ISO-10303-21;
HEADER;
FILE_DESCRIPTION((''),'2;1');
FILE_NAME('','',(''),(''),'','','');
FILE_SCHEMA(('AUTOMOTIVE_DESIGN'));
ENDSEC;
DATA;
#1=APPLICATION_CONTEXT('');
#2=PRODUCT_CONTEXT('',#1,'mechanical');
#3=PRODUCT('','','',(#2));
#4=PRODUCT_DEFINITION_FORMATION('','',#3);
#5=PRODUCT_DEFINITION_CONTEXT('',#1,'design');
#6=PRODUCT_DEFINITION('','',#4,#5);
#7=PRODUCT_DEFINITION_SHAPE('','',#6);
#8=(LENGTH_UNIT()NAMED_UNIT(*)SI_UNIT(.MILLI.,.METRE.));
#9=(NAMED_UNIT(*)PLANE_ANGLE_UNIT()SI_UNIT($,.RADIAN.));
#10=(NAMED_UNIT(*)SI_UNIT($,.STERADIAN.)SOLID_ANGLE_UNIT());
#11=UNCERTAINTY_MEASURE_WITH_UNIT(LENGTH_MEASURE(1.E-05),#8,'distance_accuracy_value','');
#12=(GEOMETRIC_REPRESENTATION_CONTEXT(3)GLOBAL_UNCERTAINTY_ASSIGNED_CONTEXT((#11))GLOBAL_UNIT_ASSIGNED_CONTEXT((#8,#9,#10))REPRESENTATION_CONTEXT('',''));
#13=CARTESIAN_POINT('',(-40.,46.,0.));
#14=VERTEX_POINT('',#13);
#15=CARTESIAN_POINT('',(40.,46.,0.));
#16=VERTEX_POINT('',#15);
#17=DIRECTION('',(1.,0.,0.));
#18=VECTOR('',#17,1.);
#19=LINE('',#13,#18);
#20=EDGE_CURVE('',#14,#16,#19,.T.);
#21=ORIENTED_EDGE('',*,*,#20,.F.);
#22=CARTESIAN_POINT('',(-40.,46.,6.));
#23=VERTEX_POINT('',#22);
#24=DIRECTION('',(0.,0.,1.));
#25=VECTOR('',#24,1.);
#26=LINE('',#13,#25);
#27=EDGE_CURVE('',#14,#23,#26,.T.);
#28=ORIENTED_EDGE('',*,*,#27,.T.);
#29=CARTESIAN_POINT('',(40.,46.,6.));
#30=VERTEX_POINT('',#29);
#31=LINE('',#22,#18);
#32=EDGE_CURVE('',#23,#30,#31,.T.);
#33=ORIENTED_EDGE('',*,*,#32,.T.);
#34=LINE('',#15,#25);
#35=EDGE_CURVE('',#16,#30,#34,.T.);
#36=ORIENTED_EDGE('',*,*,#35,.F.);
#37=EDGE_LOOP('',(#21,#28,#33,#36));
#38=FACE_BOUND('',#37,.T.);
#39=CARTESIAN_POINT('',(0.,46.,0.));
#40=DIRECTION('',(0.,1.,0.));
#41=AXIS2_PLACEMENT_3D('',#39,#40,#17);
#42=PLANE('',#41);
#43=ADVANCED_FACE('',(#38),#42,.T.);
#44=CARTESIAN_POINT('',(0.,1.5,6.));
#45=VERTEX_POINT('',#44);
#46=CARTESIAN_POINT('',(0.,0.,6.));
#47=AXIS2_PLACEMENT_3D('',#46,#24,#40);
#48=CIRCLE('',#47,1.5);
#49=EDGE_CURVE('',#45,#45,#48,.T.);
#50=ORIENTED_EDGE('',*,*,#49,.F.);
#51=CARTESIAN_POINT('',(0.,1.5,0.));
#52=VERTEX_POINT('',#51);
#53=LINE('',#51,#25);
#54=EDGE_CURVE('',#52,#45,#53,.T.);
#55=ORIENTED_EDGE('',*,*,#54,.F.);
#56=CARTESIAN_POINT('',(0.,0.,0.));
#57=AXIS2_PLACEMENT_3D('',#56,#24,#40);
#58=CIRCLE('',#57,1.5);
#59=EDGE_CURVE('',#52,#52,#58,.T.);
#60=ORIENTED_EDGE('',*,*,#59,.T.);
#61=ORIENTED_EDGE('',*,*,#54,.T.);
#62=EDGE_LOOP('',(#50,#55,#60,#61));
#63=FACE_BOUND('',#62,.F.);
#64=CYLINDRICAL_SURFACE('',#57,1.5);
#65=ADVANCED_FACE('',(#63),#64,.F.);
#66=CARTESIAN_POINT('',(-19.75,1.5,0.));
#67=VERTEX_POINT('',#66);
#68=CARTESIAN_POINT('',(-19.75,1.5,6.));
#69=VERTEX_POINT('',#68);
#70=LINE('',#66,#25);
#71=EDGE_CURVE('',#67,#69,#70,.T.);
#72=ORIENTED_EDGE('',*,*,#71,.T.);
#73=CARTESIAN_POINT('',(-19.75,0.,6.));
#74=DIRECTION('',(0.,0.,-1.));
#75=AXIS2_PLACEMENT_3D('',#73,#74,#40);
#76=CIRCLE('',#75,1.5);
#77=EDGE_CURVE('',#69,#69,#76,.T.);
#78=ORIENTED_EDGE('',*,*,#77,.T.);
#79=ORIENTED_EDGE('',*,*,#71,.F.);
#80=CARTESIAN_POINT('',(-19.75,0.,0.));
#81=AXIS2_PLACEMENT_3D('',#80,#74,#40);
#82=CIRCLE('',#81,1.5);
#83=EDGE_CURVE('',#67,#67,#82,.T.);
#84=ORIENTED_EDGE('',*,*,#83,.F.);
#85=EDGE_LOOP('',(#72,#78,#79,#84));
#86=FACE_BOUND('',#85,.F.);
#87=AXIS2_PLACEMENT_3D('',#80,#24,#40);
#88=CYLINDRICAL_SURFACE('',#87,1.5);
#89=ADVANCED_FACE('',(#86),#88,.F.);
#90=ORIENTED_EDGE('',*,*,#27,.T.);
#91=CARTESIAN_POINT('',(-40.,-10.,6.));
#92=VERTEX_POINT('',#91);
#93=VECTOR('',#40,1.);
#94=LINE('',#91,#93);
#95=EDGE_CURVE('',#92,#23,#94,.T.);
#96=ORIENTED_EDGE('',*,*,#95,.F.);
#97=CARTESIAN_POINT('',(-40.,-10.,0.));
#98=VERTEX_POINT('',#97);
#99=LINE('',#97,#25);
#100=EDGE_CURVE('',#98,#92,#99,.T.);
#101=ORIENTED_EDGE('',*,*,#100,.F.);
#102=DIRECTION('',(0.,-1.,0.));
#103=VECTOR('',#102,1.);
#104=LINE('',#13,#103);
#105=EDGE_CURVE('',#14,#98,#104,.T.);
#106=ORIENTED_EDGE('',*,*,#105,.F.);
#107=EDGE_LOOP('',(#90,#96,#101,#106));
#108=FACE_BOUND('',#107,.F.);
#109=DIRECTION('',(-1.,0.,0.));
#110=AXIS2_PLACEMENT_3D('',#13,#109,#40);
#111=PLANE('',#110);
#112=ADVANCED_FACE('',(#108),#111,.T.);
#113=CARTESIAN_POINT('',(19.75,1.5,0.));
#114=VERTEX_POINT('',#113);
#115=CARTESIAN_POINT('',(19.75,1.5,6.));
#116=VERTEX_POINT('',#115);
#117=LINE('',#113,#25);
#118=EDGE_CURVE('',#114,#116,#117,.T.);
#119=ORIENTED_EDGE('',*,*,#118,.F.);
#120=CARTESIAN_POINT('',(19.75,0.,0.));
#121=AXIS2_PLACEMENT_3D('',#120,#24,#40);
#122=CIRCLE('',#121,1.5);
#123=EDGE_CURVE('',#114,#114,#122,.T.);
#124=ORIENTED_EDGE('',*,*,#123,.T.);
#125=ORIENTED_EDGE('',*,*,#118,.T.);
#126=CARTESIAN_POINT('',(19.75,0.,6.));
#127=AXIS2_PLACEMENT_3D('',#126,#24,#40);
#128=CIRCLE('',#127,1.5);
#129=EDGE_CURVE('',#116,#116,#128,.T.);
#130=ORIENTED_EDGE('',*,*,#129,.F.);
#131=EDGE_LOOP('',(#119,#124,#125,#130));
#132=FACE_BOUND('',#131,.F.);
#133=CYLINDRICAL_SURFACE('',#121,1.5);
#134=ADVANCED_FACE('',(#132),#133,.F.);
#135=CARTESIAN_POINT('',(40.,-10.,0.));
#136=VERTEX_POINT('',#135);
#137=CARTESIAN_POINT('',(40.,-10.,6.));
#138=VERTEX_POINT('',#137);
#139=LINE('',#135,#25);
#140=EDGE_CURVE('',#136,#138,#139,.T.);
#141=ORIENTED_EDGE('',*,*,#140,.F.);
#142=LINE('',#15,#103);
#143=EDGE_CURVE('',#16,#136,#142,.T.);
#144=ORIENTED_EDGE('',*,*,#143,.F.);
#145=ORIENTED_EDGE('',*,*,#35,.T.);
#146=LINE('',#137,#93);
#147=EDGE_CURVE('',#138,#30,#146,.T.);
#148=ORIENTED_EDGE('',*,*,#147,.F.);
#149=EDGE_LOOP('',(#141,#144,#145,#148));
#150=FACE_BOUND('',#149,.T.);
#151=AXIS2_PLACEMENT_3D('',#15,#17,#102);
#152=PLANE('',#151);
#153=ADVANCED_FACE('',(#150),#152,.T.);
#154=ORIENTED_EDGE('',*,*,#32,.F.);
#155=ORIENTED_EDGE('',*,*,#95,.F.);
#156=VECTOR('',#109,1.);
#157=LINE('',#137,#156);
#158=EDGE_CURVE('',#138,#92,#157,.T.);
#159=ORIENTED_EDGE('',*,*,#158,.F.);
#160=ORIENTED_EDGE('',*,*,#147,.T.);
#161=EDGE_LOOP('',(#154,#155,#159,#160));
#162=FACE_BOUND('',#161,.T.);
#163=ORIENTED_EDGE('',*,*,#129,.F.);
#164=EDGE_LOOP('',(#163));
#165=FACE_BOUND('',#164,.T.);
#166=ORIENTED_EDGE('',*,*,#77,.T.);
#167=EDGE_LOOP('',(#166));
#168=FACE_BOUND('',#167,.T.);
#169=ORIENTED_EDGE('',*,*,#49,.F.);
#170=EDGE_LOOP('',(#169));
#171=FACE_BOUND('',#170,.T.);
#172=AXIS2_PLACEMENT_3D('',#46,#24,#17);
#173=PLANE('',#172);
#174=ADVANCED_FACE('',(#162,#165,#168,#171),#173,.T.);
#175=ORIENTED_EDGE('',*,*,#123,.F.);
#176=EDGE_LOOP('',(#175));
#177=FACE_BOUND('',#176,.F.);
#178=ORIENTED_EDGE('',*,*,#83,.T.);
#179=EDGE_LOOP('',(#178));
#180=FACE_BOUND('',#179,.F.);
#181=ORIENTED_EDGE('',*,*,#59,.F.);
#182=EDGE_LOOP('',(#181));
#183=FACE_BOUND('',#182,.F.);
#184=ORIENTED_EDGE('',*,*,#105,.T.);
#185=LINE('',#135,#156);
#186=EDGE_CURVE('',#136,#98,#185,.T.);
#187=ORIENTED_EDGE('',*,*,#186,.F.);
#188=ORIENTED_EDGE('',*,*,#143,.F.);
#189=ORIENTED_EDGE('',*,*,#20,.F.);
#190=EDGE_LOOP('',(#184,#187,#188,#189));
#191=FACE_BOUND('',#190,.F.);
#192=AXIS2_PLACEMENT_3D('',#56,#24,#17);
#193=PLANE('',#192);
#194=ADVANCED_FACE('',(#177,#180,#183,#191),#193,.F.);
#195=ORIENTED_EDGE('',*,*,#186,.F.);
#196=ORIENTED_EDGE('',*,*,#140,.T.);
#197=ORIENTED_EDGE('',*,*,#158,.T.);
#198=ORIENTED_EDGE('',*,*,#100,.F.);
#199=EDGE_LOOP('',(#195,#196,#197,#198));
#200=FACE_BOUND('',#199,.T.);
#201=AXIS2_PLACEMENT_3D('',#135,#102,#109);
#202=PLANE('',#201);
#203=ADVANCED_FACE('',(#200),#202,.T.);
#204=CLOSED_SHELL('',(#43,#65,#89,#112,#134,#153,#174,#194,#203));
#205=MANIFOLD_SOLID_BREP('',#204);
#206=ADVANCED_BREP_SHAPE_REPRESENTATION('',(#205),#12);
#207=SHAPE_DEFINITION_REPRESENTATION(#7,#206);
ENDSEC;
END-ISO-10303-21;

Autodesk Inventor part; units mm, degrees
ref_plane "YZ Plane" through (0, 0, 0) normal (1, 0, 0) x (0, 1, 0)
ref_plane "XZ Plane" through (0, 0, 0) normal (0, 1, 0) x (-1, 0, 0)
ref_plane "XY Plane" through (0, 0, 0) normal (0, 0, 1) x (1, 0, 0)
sketch "Sketch1" plane through (0, 0, 0) normal (0, 0, 1) x (1, 0, 0)
  line L0 (0, 0) -> (0, 40)
  line L1 (0, 40) -> (0, 46)
  line L2 (0, 46) -> (40, 46)
  line L3 (40, -10) -> (0, -10)
  line L4 (0, -10) -> (0, 0)
  line L5 (40, 46) -> (40, 40)
  line L6 (40, 40) -> (40, -10)
  line L7 (0, 40) -> (40, 40) construction
  line L8 (0, 0) -> (19.75, 0) construction
  dimension "d0" = 40
  dimension "d1" = 6
  dimension "d2" = 10
  dimension "d3" = 40
  dimension "d4" = 40
  dimension "d5" = 19.75
extrude "Extrusion1" add sketch "Sketch1" along normal blind 6
fillet "Fillet1" [suppressed]
hole "Hole1" at (0, 0, 0) at (19.75, 0, 0) direction (0, 0, 1) diameter 3 end through all
mirror "Mirror1" about plane through (0, 40, 0) normal (-1, 0, 0)
properties part number "segment0a" material "Plywood, Finish"
